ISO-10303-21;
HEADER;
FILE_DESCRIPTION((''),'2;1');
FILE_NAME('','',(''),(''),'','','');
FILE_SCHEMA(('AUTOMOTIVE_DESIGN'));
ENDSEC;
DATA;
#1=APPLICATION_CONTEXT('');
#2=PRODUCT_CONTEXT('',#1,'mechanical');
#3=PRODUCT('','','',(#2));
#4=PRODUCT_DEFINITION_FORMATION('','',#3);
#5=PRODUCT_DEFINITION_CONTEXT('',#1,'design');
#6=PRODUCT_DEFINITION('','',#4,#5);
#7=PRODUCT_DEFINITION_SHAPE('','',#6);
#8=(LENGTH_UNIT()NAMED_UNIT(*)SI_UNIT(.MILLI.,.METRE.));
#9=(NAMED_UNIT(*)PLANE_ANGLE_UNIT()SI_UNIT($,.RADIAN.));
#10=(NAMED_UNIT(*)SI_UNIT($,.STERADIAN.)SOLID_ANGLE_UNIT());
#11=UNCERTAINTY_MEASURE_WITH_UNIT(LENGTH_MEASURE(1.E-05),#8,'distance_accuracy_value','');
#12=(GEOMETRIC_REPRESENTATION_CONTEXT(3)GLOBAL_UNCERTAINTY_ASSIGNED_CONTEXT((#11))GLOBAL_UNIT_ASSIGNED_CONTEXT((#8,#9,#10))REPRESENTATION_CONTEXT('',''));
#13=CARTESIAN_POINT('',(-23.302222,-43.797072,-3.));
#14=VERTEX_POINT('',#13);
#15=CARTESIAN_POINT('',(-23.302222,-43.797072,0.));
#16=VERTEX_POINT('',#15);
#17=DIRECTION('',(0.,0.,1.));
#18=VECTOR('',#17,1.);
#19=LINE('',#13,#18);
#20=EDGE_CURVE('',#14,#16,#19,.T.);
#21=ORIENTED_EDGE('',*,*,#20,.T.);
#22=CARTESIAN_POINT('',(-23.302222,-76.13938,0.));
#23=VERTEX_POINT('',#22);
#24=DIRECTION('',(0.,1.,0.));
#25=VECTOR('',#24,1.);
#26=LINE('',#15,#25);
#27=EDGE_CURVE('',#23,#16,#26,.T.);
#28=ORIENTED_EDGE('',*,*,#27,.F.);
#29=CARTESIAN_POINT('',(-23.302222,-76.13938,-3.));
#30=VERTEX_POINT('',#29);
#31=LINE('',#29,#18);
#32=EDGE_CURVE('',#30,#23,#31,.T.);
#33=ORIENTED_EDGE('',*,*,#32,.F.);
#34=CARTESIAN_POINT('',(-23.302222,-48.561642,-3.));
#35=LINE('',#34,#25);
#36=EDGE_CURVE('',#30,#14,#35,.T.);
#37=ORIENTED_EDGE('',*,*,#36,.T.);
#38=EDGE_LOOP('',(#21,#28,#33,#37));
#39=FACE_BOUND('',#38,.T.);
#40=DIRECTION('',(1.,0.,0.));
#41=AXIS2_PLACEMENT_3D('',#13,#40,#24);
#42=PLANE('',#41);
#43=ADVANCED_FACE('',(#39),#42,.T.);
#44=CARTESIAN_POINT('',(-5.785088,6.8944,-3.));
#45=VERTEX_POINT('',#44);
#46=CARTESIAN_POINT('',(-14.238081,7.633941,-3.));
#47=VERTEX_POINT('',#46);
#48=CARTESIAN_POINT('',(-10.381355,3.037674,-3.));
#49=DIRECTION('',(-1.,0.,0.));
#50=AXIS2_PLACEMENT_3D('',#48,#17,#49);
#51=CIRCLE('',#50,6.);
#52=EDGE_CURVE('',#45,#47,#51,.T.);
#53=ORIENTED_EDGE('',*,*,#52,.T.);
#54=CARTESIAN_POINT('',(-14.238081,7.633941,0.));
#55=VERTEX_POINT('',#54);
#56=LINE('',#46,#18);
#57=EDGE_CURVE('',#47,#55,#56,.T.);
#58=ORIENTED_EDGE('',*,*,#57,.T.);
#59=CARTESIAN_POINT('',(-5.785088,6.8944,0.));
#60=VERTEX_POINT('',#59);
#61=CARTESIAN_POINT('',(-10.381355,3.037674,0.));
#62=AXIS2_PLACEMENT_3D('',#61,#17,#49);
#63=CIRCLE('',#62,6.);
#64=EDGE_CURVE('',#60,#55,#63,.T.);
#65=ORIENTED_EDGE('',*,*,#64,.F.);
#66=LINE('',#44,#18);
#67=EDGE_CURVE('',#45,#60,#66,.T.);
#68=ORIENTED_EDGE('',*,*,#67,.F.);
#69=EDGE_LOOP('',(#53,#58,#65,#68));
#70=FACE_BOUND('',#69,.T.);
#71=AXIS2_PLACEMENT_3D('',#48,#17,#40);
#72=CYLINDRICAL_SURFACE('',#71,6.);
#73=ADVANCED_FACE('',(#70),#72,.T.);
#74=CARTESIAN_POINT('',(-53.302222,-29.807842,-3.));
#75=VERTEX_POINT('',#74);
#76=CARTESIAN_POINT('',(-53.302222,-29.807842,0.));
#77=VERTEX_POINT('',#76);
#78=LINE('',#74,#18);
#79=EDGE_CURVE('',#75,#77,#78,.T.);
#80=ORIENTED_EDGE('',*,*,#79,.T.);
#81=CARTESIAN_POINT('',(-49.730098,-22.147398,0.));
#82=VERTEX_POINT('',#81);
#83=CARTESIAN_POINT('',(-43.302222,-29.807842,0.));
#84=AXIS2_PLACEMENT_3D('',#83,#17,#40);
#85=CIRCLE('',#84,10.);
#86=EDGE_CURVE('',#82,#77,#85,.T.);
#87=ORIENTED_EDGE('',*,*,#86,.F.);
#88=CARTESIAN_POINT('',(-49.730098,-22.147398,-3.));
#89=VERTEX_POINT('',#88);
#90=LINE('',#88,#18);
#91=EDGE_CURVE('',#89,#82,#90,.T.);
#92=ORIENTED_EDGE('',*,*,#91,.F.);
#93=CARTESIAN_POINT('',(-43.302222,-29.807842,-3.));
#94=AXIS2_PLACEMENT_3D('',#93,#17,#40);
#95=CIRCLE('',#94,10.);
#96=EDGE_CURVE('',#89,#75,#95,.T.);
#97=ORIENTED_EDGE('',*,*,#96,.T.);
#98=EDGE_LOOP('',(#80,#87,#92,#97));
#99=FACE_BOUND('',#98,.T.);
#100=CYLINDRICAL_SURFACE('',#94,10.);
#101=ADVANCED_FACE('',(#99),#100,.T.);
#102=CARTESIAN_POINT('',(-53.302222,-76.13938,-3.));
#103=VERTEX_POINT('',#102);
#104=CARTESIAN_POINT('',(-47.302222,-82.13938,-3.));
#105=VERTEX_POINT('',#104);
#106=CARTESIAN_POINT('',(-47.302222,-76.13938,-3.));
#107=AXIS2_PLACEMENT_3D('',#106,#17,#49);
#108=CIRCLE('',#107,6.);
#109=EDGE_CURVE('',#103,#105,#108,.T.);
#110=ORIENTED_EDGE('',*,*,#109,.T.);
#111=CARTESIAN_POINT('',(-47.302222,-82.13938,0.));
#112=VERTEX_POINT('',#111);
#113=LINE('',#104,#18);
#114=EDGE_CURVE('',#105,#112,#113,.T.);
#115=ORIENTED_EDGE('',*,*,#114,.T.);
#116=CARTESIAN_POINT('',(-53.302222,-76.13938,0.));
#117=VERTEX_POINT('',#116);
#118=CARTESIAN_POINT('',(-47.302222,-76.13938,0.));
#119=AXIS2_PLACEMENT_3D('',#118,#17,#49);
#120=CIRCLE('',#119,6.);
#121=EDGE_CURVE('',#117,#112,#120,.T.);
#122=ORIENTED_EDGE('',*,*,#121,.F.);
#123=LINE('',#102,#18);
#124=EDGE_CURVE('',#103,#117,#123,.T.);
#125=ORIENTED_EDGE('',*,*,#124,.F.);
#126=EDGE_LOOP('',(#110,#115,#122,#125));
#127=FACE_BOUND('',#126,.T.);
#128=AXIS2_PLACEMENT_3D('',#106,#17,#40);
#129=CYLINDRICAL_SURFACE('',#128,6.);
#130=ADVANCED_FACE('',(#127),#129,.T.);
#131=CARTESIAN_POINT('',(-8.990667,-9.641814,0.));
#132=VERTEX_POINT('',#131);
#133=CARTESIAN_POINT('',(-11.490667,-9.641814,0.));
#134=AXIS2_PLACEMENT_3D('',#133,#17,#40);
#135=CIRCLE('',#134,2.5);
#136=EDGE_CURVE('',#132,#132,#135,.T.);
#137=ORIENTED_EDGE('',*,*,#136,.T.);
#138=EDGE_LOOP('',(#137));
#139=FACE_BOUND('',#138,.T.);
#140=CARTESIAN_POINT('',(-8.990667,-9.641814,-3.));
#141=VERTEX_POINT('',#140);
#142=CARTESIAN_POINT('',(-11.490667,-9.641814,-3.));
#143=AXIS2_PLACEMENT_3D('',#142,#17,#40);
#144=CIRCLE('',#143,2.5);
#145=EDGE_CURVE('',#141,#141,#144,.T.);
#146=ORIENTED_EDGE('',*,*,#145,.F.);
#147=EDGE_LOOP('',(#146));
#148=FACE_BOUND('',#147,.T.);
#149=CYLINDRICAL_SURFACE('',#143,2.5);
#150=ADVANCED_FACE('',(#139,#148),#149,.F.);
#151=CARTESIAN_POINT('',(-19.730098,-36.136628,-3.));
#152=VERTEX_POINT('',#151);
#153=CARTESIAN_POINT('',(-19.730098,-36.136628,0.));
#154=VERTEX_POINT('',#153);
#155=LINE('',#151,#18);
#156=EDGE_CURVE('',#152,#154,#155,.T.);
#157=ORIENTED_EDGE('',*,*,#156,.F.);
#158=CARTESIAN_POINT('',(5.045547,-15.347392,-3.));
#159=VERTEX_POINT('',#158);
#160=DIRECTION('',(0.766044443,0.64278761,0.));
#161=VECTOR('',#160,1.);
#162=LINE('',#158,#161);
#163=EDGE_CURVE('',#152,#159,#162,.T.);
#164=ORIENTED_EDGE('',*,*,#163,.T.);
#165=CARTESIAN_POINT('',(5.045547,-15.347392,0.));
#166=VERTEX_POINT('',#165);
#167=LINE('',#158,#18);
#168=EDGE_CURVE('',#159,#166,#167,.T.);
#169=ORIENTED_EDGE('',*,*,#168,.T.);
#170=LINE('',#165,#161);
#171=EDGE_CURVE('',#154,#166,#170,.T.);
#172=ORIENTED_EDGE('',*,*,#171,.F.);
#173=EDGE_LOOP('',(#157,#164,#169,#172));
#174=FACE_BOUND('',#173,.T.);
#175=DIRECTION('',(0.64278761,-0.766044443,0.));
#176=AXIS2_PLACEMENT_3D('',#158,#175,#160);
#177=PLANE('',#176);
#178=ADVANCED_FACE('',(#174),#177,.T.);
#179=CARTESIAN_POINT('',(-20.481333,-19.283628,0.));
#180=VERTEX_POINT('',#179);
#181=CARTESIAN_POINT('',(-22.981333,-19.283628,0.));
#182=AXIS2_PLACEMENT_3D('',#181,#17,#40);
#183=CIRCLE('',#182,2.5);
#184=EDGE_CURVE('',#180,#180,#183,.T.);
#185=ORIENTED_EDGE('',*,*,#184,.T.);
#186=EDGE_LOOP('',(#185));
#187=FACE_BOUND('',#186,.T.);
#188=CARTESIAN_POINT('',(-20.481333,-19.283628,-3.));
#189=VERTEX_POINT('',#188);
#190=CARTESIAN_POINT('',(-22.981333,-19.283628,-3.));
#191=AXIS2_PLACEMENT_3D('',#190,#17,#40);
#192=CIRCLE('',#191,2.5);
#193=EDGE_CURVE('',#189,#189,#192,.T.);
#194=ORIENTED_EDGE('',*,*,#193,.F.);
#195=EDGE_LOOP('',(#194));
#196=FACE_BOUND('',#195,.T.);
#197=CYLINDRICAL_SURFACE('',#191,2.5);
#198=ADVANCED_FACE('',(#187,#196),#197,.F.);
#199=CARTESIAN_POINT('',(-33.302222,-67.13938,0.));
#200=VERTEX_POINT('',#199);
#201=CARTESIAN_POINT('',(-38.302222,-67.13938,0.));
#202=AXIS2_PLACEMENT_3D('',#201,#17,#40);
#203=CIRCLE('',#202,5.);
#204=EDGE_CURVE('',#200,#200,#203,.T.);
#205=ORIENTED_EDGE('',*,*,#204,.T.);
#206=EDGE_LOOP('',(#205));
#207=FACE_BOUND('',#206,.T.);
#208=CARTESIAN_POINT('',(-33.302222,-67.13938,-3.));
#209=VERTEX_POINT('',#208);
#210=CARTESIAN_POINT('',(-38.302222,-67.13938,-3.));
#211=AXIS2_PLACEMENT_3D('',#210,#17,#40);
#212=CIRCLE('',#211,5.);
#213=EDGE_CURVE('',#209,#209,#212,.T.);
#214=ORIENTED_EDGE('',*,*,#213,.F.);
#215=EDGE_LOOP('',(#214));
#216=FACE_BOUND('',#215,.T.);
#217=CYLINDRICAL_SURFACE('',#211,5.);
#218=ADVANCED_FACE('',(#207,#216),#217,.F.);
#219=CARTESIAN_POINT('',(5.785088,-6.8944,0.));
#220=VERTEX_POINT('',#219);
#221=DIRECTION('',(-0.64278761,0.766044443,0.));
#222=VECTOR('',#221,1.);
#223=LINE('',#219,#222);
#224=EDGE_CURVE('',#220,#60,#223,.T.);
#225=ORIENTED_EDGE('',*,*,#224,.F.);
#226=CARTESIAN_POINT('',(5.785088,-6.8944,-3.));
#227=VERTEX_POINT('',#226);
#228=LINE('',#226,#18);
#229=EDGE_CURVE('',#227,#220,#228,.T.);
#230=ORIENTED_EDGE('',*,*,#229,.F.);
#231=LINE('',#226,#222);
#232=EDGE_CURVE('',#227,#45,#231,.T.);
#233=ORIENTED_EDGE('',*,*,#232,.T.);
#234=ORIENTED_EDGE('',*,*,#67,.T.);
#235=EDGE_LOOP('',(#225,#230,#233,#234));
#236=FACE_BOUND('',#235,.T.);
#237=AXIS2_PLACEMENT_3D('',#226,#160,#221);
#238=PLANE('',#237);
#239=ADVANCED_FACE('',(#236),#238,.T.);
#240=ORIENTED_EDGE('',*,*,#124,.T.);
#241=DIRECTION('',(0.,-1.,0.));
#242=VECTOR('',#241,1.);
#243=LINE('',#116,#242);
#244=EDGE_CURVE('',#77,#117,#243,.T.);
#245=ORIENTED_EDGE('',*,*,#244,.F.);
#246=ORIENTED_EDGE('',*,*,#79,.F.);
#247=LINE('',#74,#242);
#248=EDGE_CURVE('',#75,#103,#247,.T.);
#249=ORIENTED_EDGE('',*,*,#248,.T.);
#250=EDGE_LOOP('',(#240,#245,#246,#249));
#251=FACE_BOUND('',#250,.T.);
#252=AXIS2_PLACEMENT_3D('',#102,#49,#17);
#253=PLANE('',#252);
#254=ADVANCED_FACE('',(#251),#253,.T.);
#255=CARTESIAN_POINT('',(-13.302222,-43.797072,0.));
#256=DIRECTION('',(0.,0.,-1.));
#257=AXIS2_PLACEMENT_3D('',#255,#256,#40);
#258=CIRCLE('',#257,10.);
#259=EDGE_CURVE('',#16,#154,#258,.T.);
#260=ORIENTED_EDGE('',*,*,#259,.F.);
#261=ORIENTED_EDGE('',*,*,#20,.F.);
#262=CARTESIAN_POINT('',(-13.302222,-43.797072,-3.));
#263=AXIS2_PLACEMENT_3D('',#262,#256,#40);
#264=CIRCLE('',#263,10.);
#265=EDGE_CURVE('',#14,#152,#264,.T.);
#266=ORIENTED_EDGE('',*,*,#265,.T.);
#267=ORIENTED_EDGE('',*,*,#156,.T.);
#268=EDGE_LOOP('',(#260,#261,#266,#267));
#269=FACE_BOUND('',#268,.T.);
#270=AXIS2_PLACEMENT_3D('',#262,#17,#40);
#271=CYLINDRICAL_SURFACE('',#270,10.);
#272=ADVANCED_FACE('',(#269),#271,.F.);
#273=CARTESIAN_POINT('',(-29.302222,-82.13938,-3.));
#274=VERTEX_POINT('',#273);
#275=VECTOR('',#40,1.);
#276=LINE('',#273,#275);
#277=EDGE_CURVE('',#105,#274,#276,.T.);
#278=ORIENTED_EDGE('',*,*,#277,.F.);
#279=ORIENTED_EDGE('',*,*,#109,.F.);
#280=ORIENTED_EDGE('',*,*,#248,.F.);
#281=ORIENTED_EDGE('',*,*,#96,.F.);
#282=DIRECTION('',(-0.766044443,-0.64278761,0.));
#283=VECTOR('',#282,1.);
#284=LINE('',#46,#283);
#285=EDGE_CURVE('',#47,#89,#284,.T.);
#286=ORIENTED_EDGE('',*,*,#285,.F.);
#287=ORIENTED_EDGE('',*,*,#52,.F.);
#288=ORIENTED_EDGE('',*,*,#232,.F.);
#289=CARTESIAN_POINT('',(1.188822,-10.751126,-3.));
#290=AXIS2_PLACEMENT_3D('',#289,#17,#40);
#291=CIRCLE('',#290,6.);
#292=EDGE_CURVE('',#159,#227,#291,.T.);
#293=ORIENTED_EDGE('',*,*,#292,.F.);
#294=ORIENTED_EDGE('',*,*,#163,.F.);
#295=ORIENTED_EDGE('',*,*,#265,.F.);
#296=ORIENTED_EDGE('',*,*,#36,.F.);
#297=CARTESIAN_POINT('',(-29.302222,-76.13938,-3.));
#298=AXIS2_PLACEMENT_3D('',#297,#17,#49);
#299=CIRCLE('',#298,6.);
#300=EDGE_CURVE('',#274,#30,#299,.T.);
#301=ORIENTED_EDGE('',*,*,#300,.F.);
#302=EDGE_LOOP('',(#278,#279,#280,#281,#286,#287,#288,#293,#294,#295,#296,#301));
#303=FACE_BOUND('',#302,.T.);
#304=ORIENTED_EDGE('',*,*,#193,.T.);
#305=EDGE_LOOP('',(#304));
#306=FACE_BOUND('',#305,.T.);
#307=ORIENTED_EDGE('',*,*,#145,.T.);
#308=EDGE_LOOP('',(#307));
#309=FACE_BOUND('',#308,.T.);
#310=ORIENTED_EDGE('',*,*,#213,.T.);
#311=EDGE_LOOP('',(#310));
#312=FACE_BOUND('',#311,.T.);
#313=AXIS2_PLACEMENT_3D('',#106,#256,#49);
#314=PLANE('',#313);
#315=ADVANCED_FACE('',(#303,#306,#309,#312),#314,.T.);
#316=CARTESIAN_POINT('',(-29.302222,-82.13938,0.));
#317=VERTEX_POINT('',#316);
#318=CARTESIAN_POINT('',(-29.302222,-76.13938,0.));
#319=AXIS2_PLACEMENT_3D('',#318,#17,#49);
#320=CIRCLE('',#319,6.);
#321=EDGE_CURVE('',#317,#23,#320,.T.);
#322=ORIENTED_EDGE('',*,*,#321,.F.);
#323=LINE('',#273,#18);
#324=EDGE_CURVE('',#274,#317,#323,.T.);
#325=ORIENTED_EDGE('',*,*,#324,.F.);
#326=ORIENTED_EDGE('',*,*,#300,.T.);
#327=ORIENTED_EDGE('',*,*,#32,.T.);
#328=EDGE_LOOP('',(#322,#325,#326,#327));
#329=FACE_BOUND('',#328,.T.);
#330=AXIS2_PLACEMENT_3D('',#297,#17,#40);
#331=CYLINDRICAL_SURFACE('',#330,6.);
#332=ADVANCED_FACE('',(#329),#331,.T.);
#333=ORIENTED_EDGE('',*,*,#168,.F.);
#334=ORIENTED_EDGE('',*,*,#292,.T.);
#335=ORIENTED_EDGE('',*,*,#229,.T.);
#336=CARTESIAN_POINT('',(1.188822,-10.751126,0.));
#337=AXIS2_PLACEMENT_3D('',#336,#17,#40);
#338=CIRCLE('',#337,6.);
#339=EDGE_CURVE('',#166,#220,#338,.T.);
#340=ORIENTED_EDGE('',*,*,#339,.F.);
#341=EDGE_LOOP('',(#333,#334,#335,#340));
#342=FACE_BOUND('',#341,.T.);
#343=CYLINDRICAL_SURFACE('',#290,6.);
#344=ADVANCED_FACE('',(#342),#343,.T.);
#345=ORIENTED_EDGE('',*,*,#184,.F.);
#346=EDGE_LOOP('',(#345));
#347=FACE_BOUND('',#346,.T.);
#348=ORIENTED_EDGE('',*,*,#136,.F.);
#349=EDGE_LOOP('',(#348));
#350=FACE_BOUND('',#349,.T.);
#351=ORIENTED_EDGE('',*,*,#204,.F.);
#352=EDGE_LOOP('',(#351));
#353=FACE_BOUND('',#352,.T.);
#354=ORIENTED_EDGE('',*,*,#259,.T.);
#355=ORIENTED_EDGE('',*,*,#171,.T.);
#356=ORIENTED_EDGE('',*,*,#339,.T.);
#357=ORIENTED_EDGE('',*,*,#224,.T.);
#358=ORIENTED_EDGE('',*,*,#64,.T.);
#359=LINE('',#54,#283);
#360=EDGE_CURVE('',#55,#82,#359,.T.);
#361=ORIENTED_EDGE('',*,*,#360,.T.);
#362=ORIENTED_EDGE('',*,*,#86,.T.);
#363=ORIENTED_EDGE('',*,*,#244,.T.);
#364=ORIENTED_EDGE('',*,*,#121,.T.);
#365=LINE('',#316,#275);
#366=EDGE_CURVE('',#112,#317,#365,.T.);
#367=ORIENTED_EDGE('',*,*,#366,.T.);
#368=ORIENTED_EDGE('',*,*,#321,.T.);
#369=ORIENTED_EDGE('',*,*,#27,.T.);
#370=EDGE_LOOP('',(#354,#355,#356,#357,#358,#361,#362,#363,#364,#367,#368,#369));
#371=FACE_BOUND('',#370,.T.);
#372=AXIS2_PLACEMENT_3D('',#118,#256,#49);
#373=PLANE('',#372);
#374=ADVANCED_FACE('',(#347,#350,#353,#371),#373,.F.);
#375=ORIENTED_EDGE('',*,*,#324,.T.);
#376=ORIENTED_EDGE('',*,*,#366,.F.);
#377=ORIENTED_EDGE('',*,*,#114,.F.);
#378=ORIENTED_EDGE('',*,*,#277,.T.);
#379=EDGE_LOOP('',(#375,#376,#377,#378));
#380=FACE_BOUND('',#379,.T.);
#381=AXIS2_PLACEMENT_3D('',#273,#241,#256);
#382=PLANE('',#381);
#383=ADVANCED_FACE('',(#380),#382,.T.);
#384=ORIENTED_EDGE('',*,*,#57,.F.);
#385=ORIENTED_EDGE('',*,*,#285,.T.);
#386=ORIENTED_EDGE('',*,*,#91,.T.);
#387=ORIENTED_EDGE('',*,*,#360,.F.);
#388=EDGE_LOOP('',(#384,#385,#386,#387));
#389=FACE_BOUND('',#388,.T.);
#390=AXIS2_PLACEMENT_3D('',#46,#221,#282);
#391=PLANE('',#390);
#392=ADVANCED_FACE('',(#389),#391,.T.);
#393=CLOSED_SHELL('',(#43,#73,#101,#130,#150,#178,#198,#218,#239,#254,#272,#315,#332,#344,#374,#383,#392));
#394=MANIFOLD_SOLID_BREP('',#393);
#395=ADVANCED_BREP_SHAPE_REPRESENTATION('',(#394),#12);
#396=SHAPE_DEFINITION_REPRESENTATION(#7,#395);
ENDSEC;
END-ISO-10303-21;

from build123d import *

# Parameters (mm, degrees)
SKETCH1_R          = 5
SKETCH1_R_2        = 2.5
BASE_FLANGE1_DEPTH = 3


# Sheet-metal steps are written as plain solids
with BuildPart() as part:
    # Sketch1 → Base-Flange1 (new body)
    with BuildSketch(Plane.XY):
        with BuildLine():
            Line((-14.238080804, 7.633940989), (-49.730098253, -22.147397762))
            ThreePointArc((-49.730098253, -22.147397762), (-52.365300026, -25.581659576), (-53.302222156, -29.807842194))
            Line((-53.302222156, -29.807842194), (-53.302222156, -48.56164166))
            Line((-53.302222156, -48.56164166), (-53.302222156, -76.139380484))
            ThreePointArc((-53.302222156, -76.139380484), (-51.544862843, -80.382021171), (-47.302222156, -82.139380484))
            Line((-47.302222156, -82.139380484), (-29.302222156, -82.139380484))
            ThreePointArc((-29.302222156, -82.139380484), (-25.059581469, -80.382021171), (-23.302222156, -76.139380484))
            Line((-23.302222156, -76.139380484), (-23.302222156, -48.56164166))
            Line((-23.302222156, -48.56164166), (-23.302222156, -43.797071938))
            ThreePointArc((-23.302222156, -43.797071938), (-22.365300026, -39.570889321), (-19.730098253, -36.136627507))
            Line((-19.730098253, -36.136627507), (5.045547487, -15.347392305))
            ThreePointArc((5.045547487, -15.347392305), (7.165990017, -11.274060103), (5.785088487, -6.894399988))
            Line((5.785088487, -6.894399988), (-5.785088487, 6.894399988))
            ThreePointArc((-5.785088487, 6.894399988), (-9.858420689, 9.014842519), (-14.238080804, 7.633940989))
        make_face()
        with Locations((-38.302222156, -67.139380484)):
            Circle(SKETCH1_R, mode=Mode.SUBTRACT)
        with Locations((-11.490666647, -9.641814145)):
            Circle(SKETCH1_R_2, mode=Mode.SUBTRACT)
        with Locations((-22.981333294, -19.283628291)):
            Circle(SKETCH1_R_2, mode=Mode.SUBTRACT)
    extrude(amount=-BASE_FLANGE1_DEPTH)


solid = part.part
